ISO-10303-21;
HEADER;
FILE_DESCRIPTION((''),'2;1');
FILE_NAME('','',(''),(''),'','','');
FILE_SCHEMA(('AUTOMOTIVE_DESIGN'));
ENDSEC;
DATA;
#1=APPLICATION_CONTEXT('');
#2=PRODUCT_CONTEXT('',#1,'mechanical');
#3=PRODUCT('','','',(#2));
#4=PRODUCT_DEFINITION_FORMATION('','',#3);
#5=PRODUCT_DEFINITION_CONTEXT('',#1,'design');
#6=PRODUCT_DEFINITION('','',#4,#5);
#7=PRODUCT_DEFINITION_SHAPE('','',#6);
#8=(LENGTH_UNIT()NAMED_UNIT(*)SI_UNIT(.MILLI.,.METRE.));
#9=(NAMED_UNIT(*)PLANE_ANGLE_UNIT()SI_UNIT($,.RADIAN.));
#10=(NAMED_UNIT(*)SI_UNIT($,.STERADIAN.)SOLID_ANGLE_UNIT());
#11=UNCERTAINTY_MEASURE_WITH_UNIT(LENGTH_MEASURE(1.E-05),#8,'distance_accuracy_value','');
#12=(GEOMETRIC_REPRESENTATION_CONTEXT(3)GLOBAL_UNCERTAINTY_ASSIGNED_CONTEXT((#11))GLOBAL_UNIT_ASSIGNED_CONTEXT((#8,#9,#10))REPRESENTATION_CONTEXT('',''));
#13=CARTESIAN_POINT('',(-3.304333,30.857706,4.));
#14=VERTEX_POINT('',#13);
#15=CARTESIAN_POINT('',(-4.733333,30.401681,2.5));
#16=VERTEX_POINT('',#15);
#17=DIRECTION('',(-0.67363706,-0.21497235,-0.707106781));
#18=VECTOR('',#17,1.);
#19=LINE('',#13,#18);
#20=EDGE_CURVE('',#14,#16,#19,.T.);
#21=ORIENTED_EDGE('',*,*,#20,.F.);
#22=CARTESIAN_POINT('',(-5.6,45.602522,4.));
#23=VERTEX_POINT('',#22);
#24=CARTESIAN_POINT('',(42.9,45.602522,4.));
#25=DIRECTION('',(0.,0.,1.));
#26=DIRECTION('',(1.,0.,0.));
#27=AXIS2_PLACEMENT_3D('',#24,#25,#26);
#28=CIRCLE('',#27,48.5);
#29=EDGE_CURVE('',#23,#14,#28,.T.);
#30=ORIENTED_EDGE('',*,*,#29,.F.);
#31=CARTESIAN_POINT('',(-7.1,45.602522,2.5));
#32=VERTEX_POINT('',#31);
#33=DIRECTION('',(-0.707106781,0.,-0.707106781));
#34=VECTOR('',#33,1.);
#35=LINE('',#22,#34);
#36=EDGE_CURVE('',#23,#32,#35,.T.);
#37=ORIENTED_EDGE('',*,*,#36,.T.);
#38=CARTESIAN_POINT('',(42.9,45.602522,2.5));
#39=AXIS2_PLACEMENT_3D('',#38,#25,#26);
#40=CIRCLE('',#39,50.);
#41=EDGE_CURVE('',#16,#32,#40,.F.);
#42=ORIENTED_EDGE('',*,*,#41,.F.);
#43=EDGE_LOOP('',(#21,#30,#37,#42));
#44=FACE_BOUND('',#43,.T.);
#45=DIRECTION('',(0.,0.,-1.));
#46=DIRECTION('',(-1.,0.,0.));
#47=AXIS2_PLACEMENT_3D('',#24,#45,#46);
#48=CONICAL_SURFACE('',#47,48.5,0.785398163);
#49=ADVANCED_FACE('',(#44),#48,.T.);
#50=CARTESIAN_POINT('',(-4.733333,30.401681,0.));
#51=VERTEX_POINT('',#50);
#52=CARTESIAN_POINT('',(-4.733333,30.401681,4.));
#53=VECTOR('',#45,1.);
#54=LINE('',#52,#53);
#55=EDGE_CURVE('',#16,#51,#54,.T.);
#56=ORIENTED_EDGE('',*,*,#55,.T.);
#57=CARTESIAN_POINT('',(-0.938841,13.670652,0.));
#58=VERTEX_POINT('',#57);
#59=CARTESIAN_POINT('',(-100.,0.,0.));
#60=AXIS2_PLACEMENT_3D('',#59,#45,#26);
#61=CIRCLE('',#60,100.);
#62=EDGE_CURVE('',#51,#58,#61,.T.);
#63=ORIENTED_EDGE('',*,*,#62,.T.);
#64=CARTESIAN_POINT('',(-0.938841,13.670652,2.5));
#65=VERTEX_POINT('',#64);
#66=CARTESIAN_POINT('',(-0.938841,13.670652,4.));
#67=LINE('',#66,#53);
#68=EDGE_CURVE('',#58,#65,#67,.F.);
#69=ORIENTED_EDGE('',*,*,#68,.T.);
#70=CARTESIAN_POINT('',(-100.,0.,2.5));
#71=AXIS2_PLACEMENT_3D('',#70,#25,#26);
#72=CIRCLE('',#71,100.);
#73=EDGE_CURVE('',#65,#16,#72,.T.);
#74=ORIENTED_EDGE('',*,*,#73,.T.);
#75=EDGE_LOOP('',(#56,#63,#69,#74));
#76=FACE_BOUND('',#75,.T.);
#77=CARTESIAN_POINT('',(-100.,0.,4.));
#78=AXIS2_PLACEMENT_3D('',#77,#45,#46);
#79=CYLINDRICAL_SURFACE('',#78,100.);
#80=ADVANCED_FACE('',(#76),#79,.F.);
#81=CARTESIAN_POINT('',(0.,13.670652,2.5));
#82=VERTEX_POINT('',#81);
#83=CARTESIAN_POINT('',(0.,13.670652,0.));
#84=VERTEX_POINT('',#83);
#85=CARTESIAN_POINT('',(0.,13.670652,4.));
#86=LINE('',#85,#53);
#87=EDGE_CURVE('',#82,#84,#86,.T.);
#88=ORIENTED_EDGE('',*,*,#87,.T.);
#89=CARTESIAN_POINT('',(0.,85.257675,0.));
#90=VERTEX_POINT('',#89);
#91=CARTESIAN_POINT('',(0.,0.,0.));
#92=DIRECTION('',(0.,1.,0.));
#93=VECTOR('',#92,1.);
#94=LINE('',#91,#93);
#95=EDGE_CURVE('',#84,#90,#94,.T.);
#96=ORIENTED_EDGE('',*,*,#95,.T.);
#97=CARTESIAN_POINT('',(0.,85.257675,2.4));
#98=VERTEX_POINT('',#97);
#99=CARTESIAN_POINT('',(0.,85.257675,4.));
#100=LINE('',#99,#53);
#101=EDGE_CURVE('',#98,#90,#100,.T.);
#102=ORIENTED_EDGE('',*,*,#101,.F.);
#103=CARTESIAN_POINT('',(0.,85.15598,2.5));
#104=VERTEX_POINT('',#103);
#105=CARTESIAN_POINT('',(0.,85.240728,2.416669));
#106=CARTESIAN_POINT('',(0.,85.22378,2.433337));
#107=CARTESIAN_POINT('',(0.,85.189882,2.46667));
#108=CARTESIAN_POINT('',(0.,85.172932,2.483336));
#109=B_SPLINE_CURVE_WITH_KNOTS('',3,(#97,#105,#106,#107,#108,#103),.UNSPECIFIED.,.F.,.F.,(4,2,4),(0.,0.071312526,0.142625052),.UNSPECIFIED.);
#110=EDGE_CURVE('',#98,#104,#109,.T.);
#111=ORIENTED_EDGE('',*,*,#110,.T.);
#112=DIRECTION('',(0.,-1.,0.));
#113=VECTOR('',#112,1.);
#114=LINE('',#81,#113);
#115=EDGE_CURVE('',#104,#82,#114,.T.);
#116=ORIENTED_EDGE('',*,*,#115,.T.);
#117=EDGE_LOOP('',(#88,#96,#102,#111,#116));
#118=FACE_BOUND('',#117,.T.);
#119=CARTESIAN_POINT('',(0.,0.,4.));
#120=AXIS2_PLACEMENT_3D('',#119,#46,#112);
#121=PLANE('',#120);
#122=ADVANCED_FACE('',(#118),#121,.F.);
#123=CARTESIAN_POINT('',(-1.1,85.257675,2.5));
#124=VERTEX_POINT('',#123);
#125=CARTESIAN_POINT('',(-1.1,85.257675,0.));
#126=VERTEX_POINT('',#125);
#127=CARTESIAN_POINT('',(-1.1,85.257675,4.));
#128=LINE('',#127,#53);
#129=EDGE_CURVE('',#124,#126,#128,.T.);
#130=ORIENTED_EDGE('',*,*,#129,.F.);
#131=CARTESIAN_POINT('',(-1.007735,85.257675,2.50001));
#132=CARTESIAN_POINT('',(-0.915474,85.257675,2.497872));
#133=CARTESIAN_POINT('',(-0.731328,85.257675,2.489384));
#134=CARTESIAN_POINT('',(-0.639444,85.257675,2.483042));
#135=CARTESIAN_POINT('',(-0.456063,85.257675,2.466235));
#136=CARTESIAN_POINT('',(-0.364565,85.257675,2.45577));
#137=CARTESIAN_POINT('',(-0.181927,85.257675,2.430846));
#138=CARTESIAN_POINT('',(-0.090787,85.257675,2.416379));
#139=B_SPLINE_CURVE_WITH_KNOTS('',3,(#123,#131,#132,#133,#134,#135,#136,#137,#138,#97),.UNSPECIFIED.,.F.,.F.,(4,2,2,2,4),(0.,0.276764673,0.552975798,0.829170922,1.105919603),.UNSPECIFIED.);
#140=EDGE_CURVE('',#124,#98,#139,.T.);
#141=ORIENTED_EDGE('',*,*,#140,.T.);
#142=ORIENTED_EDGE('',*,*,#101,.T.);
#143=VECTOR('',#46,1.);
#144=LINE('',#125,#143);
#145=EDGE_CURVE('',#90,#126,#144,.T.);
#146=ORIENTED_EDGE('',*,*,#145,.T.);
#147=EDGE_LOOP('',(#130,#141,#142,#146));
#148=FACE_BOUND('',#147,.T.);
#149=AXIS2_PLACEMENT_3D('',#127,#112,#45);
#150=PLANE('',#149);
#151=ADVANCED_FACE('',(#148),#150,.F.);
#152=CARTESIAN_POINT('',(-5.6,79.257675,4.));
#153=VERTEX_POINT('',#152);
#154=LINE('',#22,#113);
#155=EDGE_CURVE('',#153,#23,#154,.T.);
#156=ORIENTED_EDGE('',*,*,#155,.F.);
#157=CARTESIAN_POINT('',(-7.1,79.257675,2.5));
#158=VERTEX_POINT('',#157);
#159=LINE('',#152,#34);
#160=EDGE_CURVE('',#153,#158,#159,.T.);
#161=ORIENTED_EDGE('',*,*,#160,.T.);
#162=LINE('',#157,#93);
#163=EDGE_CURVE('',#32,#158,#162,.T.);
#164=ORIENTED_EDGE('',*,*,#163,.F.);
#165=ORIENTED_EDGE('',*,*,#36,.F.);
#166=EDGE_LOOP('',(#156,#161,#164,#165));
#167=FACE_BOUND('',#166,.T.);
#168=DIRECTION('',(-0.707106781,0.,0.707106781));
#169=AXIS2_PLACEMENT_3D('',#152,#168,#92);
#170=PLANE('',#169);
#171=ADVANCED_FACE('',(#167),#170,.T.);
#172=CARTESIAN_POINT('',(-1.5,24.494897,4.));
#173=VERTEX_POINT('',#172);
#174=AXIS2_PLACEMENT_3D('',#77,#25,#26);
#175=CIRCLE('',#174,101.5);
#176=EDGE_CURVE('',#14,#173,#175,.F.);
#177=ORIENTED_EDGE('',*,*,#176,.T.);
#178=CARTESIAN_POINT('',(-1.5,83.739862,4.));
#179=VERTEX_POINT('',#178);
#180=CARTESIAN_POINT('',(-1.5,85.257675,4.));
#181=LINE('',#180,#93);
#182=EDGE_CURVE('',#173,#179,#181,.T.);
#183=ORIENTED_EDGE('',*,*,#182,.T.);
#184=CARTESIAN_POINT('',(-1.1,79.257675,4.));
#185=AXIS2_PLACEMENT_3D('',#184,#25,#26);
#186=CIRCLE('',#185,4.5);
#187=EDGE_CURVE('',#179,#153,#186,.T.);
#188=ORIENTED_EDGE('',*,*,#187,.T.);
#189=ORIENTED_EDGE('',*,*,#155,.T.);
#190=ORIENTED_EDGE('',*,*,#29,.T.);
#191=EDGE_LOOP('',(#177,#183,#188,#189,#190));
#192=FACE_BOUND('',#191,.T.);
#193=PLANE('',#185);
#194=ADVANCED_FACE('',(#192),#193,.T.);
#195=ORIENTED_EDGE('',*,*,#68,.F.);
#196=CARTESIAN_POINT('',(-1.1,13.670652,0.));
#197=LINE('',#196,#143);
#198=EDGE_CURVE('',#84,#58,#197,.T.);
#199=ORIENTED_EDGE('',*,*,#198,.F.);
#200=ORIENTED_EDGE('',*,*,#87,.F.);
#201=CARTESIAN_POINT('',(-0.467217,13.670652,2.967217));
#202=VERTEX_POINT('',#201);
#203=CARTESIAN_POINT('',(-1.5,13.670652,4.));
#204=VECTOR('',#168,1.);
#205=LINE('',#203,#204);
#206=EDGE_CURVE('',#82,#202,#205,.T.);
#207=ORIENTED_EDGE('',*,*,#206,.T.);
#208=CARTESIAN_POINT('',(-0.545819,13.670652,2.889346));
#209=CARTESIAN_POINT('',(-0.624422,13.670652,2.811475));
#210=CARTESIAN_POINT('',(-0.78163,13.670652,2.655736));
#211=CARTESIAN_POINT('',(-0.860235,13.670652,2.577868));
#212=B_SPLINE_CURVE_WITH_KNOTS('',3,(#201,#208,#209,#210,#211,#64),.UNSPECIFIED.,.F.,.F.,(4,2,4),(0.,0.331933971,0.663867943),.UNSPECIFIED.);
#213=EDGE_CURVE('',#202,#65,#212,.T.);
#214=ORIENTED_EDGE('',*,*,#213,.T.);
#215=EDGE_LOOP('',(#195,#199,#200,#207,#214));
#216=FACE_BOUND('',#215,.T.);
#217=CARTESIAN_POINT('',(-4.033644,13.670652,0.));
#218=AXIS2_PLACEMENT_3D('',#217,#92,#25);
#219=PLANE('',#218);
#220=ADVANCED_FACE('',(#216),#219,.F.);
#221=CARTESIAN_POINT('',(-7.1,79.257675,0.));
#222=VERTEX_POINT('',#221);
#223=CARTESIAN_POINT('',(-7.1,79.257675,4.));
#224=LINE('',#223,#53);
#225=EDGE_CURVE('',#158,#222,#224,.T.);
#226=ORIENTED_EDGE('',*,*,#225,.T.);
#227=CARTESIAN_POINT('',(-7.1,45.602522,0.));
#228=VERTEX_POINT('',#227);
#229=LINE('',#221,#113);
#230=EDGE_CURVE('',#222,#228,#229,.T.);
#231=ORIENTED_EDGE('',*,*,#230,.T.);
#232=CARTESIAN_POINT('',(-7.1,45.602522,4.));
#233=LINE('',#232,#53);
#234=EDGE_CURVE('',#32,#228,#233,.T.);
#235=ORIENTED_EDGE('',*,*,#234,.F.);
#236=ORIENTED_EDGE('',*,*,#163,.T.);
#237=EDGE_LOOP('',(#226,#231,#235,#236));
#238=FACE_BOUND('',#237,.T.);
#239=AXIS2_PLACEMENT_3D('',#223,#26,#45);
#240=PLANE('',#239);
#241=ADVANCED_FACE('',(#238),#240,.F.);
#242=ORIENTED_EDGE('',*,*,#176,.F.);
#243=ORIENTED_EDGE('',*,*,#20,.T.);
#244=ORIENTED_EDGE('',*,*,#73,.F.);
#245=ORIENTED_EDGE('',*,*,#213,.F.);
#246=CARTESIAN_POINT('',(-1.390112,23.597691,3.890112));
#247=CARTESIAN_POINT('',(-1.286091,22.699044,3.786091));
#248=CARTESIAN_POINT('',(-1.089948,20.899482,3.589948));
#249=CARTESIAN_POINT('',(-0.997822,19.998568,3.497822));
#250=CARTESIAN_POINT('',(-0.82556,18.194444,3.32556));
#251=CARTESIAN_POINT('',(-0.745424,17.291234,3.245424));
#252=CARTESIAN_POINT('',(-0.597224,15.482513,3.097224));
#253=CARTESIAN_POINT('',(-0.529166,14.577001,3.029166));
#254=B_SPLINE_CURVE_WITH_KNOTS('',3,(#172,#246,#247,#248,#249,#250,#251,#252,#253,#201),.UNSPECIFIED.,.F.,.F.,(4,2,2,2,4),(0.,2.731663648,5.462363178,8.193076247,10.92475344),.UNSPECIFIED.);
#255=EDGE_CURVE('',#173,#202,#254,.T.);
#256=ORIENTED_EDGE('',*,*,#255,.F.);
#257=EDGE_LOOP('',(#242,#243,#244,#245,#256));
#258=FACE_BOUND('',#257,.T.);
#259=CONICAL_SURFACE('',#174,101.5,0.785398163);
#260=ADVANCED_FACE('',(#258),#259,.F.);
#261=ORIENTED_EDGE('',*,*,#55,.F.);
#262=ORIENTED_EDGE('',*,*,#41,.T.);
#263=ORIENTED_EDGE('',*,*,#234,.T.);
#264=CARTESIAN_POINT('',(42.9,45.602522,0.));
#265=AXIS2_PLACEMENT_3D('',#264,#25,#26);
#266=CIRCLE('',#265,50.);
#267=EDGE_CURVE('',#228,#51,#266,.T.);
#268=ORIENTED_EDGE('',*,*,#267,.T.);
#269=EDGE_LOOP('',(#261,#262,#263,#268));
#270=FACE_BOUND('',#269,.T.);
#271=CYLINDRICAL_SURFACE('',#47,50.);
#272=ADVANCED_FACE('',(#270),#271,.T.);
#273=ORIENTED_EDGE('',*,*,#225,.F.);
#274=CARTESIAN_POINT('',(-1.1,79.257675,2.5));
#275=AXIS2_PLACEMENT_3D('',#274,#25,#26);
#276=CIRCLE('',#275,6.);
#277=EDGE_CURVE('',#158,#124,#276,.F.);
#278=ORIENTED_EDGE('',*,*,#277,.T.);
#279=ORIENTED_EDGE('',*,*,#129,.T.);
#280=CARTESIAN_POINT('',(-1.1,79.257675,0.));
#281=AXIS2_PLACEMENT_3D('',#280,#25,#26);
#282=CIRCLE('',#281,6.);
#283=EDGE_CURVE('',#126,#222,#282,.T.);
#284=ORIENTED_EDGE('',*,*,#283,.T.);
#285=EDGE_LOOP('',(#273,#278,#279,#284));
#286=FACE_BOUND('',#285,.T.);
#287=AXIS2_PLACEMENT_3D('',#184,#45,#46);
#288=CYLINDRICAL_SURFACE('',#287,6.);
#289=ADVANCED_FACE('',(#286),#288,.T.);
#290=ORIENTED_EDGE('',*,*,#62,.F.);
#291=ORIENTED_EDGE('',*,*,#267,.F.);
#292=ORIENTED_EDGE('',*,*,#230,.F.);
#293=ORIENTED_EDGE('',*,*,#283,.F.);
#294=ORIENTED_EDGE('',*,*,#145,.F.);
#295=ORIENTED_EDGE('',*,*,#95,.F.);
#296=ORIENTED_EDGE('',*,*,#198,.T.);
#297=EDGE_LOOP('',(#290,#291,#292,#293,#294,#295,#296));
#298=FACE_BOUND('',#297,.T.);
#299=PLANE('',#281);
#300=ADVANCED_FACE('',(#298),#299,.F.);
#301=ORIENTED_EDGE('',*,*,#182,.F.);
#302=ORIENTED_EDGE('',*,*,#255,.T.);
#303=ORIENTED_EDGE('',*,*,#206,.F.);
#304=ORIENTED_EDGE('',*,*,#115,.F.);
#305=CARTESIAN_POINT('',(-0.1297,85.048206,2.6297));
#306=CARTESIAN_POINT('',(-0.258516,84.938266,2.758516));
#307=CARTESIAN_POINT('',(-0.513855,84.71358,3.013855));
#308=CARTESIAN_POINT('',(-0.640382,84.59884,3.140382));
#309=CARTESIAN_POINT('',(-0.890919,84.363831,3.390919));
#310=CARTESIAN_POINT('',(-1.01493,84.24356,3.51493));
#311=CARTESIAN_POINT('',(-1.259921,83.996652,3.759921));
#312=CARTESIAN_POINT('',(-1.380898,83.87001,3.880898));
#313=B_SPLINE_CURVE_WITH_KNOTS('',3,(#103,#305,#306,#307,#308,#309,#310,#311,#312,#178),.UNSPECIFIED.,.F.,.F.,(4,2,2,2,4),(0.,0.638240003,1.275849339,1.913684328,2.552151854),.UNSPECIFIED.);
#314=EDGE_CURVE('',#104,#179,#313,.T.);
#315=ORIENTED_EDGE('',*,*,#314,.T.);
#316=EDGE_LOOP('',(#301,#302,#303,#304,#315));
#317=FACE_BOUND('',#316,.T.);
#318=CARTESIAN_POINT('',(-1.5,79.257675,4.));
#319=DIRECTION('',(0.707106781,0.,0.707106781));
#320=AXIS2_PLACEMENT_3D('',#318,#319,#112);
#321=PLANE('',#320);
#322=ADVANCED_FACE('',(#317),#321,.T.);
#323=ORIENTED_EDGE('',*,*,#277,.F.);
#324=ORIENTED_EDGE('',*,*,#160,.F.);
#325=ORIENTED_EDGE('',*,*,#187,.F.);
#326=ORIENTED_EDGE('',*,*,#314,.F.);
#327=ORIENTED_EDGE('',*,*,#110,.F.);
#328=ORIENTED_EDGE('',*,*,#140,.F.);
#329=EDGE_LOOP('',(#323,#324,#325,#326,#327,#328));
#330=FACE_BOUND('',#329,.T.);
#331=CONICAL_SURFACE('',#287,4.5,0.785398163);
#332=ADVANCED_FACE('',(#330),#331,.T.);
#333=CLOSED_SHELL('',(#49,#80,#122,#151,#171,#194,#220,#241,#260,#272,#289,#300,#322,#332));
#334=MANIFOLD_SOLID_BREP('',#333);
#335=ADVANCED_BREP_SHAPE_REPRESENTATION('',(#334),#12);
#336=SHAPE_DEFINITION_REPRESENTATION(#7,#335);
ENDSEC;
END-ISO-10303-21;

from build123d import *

# Parameters (mm, degrees)
EXTRUDE_1_DEPTH     = 4
SKETCH_2_W          = 6.166461301
SKETCH_2_H          = 14.966809979
CUT_EXTRUDE_1_DEPTH = 86.646256186
CHAMFER_3_SIZE      = 1.5


with BuildPart() as part:
    # Эскиз1 → Бобышка-Вытянуть1 (new body)
    with BuildSketch(Plane.XY):
        with BuildLine():
            Line((0, 0), (0, 85.257675306))
            Line((0, 85.257675306), (-1.1, 85.257675306))
            ThreePointArc((-1.1, 85.257675306), (-5.342640687, 83.500315993), (-7.1, 79.257675306))
            Line((-7.1, 79.257675306), (-7.1, 45.60252186))
            ThreePointArc((-7.1, 45.60252186), (-6.504790591, 37.910534687), (-4.733333333, 30.40168124))
            ThreePointArc((-4.733333333, 30.40168124), (-1.190418818, 15.383974346), (0, 0))
        make_face()
    extrude(amount=EXTRUDE_1_DEPTH)

    # Эскиз2 → Вырез-Вытянуть1 (cut, through all)
    with BuildSketch(Plane.XY.offset(4)):
        with Locations((-0.950413373, 6.187246753)):
            Rectangle(SKETCH_2_W, SKETCH_2_H)
    extrude(amount=-CUT_EXTRUDE_1_DEPTH, mode=Mode.SUBTRACT)

    # Фаска3
    chamfer_3_edges = [part.edges().sort_by_distance(p)[0] for p in [
        (0, 49.464163524, 4),
    ]]
    chamfer(chamfer_3_edges, length=CHAMFER_3_SIZE)

    # Фаска4
    # the kernel refuses this chamfer: 1.5 mm, written as the material it takes off along each edge
    with BuildSketch(Plane(origin=(-100, 0, 4), x_dir=(0.9526666666666831, 0.30401681240054956, 0), z_dir=(-0.30401681240054956, 0.9526666666666831, 0))) as chamfer_4_piece_1:
        with BuildLine():
            Line((99.681801948, 1.818198052), (101.818198052, -0.318198052))
            Line((101.818198052, -0.318198052), (101.818198052, -0.543198052))
            ThreePointArc((101.818198052, -0.543198052), (100.909099026, -0.225), (100, -0.225))
            Line((100, -0.225), (99.775, 0))
            ThreePointArc((99.775, 0), (99.775, 0.909099026), (99.456801948, 1.818198052))
            Line((99.456801948, 1.818198052), (99.681801948, 1.818198052))
        make_face()
    revolve(axis=Axis((-100, 0, 4), (0, 0, -1)), revolution_arc=10.406622552, mode=Mode.SUBTRACT)
    with BuildSketch(Plane(origin=(-1.1, 79.257675306, 4), x_dir=(0.6462526290472239, 0.7631235414069935, 0), z_dir=(0.7631235414069935, -0.6462526290472239, 0))) as chamfer_4_piece_2:
        with BuildLine():
            Line((6.318198052, -1.818198052), (4.181801948, 0.318198052))
            Line((4.181801948, 0.318198052), (4.181801948, 0.543198052))
            ThreePointArc((4.181801948, 0.543198052), (5.090900974, 0.225), (6, 0.225))
            Line((6, 0.225), (6.225, 0))
            ThreePointArc((6.225, 0), (6.225, -0.909099026), (6.543198052, -1.818198052))
            Line((6.543198052, -1.818198052), (6.318198052, -1.818198052))
        make_face()
    revolve(axis=Axis((-1.1, 79.257675306, 4), (0, 0, 1)), revolution_arc=130.259658386, mode=Mode.SUBTRACT)
    with BuildSketch(Plane(origin=(42.9, 45.60252186, 4), x_dir=(-1, 0, 0), z_dir=(0, 1, 0))) as chamfer_4_piece_3:
        with BuildLine():
            Line((48.181801948, 0.318198052), (50.318198052, -1.818198052))
            Line((50.318198052, -1.818198052), (50.543198052, -1.818198052))
            ThreePointArc((50.543198052, -1.818198052), (50.225, -0.909099026), (50.225, 0))
            Line((50.225, 0), (50, 0.225))
            ThreePointArc((50, 0.225), (49.090900974, 0.225), (48.181801948, 0.543198052))
            Line((48.181801948, 0.543198052), (48.181801948, 0.318198052))
        make_face()
    revolve(axis=Axis((42.9, 45.60252186, 4), (0, 0, 1)), revolution_arc=17.69902277, mode=Mode.SUBTRACT)
    with BuildSketch(Plane(origin=(-7.1, 79.257675306, 4), x_dir=(0.9850292351397438, 0, 0.17238737169529317), z_dir=(0, -1, 0))) as chamfer_4_piece_4:
        with BuildLine():
            Line((1.845831562, 0), (-0.626868767, -1.73612491))
            Line((-0.626868767, -1.73612491), (-0.848500345, -1.697337752))
            ThreePointArc((-0.848500345, -1.697337752), (-0.37834877, -0.856701959), (-0.221631578, 0.038787159))
            Line((-0.221631578, 0.038787159), (0.038787159, 0.221631578))
            ThreePointArc((0.038787159, 0.221631578), (0.934276277, 0.064914386), (1.88461872, 0.221631578))
            Line((1.88461872, 0.221631578), (1.845831562, 0))
        make_face()
    extrude(amount=33.655153446, mode=Mode.SUBTRACT)


solid = part.part
